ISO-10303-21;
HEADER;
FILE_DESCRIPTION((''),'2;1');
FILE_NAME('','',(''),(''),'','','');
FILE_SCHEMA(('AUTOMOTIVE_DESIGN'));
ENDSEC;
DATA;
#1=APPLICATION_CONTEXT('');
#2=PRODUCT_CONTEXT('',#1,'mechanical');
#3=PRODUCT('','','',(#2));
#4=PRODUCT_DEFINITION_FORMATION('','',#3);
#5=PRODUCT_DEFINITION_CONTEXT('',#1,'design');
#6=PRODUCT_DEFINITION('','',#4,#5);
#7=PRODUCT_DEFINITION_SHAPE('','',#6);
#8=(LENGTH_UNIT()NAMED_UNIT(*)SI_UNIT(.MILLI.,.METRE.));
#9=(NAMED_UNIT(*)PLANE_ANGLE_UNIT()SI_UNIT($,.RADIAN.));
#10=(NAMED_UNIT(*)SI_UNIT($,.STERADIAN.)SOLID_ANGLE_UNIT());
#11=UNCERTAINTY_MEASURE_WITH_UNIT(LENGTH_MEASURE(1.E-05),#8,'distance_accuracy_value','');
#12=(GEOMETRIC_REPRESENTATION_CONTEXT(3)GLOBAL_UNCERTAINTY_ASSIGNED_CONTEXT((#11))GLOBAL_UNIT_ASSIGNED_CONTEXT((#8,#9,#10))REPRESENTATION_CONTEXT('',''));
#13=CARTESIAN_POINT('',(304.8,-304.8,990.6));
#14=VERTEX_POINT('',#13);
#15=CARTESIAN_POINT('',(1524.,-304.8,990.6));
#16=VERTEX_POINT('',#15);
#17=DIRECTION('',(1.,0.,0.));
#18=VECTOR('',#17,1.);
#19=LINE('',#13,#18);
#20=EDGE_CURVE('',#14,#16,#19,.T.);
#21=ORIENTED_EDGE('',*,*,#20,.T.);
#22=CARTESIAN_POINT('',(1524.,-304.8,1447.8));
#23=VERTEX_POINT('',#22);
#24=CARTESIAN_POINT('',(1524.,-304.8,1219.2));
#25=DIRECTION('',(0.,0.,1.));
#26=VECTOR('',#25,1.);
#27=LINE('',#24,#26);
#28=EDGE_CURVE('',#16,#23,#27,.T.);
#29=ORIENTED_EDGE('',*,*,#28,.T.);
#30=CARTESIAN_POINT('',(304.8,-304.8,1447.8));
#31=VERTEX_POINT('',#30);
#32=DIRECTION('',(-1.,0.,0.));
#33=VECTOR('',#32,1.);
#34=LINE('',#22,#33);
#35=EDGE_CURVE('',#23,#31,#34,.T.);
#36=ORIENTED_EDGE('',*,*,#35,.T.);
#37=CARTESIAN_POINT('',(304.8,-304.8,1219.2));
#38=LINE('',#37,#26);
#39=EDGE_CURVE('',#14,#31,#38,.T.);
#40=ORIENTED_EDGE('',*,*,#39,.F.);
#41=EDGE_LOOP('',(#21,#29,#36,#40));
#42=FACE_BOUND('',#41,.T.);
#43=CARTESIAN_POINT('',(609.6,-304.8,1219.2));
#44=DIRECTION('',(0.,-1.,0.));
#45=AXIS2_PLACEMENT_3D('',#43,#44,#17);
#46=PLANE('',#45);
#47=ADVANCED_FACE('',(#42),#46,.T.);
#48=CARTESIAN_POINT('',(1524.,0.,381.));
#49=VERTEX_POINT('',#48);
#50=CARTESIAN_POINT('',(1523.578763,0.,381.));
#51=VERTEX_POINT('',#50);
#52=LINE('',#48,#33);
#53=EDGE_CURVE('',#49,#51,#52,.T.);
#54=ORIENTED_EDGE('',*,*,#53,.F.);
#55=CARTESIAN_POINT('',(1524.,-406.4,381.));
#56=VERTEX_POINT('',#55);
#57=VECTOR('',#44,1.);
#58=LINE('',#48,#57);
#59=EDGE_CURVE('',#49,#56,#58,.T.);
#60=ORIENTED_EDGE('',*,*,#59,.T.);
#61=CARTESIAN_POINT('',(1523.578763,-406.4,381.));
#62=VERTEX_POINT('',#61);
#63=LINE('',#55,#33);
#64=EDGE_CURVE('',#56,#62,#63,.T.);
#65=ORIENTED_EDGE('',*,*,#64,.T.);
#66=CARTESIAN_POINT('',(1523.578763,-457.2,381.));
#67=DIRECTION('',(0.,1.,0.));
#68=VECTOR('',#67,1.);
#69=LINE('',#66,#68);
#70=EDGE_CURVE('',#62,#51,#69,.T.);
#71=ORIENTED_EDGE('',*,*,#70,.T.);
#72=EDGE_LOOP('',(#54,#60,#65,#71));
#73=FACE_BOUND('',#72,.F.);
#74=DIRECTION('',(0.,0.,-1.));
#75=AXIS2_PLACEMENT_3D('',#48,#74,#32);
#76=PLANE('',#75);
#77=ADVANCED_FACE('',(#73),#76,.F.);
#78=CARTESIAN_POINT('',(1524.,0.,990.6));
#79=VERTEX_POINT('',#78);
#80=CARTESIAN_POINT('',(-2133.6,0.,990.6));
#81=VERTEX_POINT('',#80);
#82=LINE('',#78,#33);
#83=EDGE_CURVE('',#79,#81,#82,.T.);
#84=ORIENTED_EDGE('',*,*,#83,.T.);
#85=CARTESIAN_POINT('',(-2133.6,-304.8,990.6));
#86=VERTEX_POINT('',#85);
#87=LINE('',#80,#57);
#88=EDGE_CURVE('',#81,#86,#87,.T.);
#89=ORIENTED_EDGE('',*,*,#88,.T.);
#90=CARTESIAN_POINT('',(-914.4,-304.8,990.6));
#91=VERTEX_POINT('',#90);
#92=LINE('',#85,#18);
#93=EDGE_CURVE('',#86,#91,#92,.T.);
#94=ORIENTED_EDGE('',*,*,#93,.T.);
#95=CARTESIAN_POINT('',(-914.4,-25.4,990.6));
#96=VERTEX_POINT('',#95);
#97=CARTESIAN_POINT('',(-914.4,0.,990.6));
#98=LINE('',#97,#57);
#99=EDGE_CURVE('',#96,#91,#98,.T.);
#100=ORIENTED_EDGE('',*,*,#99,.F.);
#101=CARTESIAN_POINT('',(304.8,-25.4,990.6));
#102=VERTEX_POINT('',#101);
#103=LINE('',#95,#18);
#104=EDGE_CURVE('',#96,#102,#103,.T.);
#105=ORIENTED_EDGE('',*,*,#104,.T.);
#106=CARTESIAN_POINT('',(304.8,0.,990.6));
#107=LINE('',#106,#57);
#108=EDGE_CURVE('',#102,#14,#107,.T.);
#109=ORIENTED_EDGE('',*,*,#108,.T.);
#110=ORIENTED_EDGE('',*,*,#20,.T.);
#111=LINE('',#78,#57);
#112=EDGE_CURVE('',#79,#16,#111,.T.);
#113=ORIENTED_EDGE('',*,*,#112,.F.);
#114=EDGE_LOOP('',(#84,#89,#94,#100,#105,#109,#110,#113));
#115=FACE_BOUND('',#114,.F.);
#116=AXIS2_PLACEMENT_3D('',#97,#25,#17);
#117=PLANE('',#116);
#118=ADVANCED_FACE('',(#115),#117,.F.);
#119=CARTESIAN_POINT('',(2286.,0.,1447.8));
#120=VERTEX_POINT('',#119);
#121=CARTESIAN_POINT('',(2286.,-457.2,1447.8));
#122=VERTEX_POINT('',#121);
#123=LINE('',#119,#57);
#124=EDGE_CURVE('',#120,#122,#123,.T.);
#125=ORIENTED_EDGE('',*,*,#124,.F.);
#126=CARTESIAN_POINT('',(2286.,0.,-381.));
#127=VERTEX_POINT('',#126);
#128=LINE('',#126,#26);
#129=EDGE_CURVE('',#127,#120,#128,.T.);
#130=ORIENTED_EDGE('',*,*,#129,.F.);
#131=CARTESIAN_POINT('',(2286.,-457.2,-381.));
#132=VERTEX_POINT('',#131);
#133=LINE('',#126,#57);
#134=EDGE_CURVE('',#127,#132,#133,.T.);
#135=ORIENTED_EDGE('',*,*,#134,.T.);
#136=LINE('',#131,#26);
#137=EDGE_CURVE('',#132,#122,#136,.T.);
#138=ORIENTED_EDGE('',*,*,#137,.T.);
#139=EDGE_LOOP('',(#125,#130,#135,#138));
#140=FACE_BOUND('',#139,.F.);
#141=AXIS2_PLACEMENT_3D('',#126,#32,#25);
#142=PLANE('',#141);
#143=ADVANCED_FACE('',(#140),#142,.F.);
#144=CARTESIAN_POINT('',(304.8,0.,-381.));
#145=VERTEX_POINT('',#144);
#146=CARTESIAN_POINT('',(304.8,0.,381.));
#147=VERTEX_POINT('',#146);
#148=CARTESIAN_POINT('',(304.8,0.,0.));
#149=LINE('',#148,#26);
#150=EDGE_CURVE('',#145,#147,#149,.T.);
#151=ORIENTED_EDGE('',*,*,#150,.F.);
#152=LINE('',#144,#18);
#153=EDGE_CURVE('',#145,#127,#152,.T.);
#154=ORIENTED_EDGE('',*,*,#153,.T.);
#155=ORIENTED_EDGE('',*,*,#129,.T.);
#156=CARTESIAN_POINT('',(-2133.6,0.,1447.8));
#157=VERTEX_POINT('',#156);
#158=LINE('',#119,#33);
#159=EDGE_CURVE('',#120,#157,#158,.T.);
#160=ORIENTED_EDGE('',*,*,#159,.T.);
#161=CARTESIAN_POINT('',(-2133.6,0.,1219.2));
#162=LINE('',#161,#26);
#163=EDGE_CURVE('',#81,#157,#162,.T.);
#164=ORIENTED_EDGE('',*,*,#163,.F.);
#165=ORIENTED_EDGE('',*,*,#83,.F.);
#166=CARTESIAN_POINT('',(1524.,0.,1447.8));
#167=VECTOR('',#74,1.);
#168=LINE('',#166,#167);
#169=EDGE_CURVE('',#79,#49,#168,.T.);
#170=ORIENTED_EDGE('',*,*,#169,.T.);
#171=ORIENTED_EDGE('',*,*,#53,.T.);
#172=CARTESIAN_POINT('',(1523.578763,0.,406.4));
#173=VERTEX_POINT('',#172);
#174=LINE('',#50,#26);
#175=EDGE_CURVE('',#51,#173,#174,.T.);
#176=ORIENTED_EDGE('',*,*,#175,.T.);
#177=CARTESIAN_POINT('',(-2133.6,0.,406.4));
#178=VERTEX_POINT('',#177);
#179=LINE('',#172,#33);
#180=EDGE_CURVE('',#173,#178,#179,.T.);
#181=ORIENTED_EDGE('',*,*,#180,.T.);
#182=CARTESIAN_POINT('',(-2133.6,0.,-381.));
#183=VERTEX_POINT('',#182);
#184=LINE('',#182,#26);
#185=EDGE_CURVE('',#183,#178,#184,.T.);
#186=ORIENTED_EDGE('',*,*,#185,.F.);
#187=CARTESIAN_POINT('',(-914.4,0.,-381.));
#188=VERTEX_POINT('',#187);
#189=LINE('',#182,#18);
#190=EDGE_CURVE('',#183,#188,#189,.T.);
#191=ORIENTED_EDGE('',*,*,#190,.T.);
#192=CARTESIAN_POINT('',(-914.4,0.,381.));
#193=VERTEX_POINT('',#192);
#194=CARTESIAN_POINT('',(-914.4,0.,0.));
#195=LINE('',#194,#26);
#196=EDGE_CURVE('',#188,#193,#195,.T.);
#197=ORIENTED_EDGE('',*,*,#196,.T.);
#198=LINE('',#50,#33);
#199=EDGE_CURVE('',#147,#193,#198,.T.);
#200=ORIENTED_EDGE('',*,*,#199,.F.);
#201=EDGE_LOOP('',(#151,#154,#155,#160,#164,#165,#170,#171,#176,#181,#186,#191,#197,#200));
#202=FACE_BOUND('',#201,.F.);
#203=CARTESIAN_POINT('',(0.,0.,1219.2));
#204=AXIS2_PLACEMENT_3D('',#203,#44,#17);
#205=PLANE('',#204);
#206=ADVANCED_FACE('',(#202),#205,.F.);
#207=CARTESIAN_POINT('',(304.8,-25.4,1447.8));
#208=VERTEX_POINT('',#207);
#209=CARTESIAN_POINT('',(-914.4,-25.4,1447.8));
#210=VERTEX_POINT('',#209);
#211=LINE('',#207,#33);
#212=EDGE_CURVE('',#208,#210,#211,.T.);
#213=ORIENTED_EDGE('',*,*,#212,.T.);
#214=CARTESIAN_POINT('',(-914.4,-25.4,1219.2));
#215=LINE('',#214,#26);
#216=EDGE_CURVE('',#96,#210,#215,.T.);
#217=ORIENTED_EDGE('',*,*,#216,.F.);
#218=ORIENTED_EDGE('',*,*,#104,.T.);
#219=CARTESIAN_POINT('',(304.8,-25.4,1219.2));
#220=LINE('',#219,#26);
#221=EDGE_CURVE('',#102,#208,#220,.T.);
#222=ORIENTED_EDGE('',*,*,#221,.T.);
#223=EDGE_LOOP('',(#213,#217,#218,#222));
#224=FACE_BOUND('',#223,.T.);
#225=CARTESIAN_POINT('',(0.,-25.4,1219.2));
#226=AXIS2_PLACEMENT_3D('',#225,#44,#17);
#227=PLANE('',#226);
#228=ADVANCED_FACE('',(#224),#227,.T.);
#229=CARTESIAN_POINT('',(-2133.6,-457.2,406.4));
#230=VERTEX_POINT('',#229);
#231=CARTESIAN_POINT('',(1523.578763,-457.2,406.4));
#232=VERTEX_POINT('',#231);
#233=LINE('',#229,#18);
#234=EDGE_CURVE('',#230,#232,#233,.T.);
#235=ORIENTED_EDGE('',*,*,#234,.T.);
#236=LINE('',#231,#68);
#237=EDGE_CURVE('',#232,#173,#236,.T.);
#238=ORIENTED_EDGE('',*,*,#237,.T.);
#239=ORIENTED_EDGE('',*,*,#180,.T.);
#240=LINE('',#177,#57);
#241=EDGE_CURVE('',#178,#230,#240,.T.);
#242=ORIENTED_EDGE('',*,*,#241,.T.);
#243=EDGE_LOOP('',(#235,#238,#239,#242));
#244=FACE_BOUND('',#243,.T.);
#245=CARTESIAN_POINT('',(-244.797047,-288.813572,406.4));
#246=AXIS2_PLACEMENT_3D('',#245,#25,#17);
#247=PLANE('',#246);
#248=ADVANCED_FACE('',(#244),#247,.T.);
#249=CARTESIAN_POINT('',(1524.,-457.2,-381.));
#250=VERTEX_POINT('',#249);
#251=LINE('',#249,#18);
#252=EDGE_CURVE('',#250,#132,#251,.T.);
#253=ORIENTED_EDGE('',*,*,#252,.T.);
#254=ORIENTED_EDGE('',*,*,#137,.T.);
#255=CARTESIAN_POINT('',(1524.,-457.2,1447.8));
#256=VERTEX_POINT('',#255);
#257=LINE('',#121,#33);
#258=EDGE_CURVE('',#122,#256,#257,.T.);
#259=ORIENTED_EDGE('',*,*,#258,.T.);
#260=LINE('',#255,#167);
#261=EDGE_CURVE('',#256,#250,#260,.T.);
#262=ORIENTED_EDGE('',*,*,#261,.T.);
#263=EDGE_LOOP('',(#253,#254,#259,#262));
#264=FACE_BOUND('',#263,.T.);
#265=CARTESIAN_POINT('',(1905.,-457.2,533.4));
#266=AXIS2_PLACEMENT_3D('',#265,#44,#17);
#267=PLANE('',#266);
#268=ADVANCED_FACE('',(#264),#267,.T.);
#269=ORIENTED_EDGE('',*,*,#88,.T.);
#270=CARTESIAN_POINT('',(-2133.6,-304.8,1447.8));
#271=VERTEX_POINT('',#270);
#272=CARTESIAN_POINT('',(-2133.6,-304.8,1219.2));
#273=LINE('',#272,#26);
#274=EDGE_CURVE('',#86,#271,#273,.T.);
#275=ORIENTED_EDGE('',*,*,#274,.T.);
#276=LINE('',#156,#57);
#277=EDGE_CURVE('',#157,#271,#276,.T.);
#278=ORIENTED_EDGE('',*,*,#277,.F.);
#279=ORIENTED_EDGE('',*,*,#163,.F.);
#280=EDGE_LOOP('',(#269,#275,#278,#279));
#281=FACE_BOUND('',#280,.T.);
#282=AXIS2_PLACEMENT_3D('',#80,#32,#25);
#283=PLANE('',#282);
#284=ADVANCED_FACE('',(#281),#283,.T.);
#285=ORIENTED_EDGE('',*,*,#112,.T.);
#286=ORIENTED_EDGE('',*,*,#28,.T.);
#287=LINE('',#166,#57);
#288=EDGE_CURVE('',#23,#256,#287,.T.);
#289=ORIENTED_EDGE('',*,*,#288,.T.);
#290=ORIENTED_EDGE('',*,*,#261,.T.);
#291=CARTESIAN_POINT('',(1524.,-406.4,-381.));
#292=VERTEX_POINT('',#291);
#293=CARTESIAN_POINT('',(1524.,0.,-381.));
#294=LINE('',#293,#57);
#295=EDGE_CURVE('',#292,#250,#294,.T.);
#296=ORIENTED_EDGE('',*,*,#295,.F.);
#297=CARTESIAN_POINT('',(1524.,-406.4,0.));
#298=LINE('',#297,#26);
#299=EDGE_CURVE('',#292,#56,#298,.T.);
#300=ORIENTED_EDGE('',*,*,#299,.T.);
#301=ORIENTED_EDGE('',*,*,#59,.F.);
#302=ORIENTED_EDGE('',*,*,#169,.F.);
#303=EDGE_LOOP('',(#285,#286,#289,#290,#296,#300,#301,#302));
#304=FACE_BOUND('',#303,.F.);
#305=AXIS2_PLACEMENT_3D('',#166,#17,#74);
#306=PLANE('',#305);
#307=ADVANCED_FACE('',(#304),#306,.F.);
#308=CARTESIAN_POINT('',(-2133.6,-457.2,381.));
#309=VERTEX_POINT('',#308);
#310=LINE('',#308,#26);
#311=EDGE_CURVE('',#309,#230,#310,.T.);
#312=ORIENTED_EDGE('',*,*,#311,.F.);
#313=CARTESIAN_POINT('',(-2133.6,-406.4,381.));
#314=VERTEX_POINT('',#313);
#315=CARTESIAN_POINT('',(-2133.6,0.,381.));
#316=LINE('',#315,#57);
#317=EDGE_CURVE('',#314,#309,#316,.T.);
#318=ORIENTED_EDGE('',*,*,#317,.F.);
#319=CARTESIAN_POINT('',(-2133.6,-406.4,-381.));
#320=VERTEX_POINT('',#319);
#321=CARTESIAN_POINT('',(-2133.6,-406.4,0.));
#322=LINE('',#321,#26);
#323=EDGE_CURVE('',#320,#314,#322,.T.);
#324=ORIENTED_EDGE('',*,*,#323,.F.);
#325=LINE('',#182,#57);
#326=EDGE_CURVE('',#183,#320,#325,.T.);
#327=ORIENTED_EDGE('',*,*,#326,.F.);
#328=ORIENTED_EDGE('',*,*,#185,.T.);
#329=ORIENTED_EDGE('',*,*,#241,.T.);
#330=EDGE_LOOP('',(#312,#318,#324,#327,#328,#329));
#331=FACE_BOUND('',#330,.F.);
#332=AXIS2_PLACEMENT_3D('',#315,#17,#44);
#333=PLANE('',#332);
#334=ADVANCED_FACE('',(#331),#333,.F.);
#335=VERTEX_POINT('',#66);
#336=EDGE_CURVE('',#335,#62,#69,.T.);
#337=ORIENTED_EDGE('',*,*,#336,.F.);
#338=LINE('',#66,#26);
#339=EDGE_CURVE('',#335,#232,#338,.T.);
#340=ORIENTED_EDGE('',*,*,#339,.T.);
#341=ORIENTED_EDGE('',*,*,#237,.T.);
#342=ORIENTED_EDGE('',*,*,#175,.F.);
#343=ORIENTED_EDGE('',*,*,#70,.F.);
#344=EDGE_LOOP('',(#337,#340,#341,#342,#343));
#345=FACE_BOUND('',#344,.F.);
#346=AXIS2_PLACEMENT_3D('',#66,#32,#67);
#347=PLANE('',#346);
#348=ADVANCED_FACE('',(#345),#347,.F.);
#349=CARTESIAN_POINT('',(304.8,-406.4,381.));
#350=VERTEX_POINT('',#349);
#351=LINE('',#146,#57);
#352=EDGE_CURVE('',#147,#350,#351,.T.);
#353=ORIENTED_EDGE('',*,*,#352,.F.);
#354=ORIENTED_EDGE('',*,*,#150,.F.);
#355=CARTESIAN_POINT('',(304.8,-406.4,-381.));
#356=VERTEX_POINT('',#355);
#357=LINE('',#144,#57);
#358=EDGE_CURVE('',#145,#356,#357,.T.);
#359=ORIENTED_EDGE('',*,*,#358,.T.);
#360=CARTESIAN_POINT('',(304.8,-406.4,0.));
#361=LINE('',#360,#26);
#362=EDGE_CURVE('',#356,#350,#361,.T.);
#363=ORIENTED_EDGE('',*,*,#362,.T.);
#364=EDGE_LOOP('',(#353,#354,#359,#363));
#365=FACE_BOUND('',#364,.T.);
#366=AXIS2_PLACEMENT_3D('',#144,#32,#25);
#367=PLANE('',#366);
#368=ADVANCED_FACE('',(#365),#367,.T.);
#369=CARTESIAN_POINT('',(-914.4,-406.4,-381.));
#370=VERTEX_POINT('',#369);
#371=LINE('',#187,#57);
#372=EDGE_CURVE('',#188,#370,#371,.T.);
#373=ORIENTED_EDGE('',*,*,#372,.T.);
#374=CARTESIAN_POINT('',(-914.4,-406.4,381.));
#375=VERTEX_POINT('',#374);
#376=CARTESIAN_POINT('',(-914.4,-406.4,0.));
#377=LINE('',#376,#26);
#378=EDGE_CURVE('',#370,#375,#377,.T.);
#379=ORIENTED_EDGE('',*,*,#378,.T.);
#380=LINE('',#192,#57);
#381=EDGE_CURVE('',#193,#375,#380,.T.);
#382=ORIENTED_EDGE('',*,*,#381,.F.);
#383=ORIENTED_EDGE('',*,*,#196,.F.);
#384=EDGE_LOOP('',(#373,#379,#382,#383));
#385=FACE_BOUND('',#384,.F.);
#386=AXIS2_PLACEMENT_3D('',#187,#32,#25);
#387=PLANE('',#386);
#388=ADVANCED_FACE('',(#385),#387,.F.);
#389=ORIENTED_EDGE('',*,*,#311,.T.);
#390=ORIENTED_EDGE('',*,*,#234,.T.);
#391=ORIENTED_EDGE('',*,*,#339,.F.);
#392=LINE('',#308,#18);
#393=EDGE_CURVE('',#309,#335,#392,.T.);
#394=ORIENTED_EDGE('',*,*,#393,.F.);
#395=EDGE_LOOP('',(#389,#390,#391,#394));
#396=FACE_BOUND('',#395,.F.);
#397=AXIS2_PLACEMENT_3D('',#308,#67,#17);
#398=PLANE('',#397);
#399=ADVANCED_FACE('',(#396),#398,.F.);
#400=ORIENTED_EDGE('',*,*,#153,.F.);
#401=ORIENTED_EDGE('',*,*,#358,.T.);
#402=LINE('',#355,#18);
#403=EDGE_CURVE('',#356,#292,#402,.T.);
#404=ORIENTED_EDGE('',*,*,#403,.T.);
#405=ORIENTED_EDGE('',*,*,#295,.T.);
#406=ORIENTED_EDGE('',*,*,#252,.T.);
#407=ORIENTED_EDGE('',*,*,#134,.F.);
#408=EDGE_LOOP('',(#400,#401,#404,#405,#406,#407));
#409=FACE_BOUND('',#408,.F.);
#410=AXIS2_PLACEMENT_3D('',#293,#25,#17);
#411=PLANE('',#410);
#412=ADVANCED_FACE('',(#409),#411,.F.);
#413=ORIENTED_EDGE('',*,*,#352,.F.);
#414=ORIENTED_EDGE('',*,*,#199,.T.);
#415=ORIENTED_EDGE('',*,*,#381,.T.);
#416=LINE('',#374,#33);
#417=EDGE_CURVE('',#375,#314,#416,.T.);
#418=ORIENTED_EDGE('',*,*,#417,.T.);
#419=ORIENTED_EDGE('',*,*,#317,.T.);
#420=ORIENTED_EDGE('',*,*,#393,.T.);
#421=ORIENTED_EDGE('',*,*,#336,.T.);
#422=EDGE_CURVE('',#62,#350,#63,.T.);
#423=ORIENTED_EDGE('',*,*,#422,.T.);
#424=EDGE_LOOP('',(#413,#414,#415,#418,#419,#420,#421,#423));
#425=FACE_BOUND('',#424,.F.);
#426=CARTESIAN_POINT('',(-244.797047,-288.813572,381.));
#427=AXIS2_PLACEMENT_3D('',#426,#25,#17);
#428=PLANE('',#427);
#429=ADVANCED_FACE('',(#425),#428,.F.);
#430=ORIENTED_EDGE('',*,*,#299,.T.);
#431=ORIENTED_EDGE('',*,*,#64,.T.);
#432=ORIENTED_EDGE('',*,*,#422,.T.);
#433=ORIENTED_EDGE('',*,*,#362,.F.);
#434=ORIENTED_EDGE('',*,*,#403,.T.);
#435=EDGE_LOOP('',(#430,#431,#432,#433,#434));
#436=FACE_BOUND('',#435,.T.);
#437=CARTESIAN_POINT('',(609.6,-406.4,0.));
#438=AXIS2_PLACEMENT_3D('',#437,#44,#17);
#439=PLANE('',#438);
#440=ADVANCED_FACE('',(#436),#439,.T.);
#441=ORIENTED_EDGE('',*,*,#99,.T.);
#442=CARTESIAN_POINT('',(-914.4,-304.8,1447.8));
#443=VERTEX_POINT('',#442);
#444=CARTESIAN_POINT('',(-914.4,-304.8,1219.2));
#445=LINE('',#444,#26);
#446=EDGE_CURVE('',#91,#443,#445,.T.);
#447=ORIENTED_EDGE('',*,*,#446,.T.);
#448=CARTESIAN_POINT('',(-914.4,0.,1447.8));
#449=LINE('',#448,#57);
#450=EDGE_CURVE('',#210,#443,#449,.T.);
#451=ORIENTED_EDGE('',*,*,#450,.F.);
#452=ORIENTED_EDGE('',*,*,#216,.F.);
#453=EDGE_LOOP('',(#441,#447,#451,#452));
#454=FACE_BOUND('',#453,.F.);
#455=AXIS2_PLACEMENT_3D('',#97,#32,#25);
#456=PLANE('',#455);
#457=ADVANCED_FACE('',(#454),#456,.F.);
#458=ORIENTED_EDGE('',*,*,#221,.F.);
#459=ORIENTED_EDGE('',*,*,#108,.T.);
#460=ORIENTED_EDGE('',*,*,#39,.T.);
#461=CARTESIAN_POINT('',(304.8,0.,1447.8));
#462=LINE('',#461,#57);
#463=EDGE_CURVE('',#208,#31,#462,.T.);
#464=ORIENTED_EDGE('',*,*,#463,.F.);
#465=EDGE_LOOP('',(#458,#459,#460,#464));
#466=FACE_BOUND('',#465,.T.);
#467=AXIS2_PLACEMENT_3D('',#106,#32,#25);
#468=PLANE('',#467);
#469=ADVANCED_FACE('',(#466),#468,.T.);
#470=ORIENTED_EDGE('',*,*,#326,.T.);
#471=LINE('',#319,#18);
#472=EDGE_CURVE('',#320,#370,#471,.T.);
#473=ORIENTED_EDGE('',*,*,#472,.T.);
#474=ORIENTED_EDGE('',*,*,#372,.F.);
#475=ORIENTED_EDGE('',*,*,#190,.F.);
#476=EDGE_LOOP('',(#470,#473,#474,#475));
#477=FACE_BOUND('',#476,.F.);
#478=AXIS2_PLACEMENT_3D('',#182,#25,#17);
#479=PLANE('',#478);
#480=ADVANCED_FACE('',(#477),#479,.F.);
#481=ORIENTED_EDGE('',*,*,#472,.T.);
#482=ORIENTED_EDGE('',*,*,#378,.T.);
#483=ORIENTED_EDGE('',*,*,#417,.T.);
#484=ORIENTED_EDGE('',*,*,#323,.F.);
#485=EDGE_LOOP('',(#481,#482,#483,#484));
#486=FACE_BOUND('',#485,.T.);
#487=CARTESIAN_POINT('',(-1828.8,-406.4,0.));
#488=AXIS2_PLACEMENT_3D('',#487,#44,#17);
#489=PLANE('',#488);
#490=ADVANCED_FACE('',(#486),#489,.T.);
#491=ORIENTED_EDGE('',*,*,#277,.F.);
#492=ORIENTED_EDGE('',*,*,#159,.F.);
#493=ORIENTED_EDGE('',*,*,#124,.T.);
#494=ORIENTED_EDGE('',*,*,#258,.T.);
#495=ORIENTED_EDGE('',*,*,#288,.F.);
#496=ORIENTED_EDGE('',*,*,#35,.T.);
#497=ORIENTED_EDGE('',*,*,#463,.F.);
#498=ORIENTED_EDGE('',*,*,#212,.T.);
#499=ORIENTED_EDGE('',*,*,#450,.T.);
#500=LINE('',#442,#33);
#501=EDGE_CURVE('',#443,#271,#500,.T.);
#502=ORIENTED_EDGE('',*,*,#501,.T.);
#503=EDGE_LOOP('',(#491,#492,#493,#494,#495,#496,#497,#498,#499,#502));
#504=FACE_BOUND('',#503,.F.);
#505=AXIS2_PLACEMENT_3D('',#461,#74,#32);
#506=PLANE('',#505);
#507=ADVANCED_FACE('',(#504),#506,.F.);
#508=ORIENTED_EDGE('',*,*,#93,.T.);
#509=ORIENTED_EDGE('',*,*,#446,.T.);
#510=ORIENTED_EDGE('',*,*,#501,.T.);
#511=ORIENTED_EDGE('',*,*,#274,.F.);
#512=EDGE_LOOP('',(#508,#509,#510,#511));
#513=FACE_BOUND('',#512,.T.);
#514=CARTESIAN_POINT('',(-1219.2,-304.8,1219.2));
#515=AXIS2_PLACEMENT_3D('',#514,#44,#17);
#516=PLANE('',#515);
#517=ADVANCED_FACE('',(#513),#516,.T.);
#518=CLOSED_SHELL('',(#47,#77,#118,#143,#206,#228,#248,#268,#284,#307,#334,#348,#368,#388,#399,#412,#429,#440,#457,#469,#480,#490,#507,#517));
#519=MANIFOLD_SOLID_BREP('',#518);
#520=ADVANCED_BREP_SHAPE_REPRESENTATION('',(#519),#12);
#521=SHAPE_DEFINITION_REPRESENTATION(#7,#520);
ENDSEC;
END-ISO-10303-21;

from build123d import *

# Parameters (mm, degrees)
F0_W     = 609.6
F0_H     = 762
F1_DEPTH = 406.4
F2_DEPTH = 457.2
F0_H_2   = 457.2
F3_DEPTH = 304.8
F4_W     = 1219.2
F4_H     = 406.4
F5_DEPTH = 25.4
F6_DEPTH = 25.4


with BuildPart() as f1:
    # F0 (on Front) → F1 (new body)
    with BuildSketch(Plane.XZ):
        with Locations((609.6, 0)):
            Rectangle(F0_W, F0_H)
        with Locations((1219.2, 0)):
            Rectangle(F0_W, F0_H)
    extrude(amount=F1_DEPTH)

    # F0 (on Front) → F2 (join)
    with BuildSketch(Plane.XZ):
        Polygon((1524, 381), (1524, -381), (2286, -381), (2286, 1447.8), (1524, 1447.8), (1524, 990.6), align=None)
    extrude(amount=F2_DEPTH)

    # F0 (on Front) → F3, piece 2 (join)
    with BuildSketch(Plane.XZ):
        with Locations((609.6, 1219.2)):
            Rectangle(F0_W, F0_H_2)
        with Locations((1219.2, 1219.2)):
            Rectangle(F0_W, F0_H_2)
    extrude(amount=F3_DEPTH)



with BuildPart() as f1b:
    # F0 (on Front) → F1, piece 2 (new body)
    with BuildSketch(Plane.XZ):
        with Locations((-1828.8, 0)):
            Rectangle(F0_W, F0_H)
        with Locations((-1219.2, 0)):
            Rectangle(F0_W, F0_H)
    extrude(amount=F1_DEPTH)


with BuildPart() as f3:
    # F0 (on Front) → F3 (new body)
    with BuildSketch(Plane.XZ):
        with Locations((-1219.2, 1219.2)):
            Rectangle(F0_W, F0_H_2)
        with Locations((-1828.8, 1219.2)):
            Rectangle(F0_W, F0_H_2)
    extrude(amount=F3_DEPTH)


with BuildPart() as f1_1:
    add(f1.part)

    add(f1b.part)  # F5 merges F1b
    # F4 (on face) → F5 (join)
    with BuildSketch(Plane.XY.offset(381)):
        Polygon((1523.5787630081, -457.2), (1523.5787630081, 0), (-914.4, 0), (-914.4, -406.4), (-2133.6, -406.4), (-2133.6, -457.2), align=None)
        with Locations((-1524, -203.2)):
            Rectangle(F4_W, F4_H)
    extrude(amount=F5_DEPTH)


    add(f3.part)  # F6 merges F3
    # F0 (on Front) → F6 (join)
    with BuildSketch(Plane.XZ):
        with Locations((0, 1219.2)):
            Rectangle(F0_W, F0_H_2)
        with Locations((-609.6, 1219.2)):
            Rectangle(F0_W, F0_H_2)
    extrude(amount=F6_DEPTH)


solid = f1_1.part
